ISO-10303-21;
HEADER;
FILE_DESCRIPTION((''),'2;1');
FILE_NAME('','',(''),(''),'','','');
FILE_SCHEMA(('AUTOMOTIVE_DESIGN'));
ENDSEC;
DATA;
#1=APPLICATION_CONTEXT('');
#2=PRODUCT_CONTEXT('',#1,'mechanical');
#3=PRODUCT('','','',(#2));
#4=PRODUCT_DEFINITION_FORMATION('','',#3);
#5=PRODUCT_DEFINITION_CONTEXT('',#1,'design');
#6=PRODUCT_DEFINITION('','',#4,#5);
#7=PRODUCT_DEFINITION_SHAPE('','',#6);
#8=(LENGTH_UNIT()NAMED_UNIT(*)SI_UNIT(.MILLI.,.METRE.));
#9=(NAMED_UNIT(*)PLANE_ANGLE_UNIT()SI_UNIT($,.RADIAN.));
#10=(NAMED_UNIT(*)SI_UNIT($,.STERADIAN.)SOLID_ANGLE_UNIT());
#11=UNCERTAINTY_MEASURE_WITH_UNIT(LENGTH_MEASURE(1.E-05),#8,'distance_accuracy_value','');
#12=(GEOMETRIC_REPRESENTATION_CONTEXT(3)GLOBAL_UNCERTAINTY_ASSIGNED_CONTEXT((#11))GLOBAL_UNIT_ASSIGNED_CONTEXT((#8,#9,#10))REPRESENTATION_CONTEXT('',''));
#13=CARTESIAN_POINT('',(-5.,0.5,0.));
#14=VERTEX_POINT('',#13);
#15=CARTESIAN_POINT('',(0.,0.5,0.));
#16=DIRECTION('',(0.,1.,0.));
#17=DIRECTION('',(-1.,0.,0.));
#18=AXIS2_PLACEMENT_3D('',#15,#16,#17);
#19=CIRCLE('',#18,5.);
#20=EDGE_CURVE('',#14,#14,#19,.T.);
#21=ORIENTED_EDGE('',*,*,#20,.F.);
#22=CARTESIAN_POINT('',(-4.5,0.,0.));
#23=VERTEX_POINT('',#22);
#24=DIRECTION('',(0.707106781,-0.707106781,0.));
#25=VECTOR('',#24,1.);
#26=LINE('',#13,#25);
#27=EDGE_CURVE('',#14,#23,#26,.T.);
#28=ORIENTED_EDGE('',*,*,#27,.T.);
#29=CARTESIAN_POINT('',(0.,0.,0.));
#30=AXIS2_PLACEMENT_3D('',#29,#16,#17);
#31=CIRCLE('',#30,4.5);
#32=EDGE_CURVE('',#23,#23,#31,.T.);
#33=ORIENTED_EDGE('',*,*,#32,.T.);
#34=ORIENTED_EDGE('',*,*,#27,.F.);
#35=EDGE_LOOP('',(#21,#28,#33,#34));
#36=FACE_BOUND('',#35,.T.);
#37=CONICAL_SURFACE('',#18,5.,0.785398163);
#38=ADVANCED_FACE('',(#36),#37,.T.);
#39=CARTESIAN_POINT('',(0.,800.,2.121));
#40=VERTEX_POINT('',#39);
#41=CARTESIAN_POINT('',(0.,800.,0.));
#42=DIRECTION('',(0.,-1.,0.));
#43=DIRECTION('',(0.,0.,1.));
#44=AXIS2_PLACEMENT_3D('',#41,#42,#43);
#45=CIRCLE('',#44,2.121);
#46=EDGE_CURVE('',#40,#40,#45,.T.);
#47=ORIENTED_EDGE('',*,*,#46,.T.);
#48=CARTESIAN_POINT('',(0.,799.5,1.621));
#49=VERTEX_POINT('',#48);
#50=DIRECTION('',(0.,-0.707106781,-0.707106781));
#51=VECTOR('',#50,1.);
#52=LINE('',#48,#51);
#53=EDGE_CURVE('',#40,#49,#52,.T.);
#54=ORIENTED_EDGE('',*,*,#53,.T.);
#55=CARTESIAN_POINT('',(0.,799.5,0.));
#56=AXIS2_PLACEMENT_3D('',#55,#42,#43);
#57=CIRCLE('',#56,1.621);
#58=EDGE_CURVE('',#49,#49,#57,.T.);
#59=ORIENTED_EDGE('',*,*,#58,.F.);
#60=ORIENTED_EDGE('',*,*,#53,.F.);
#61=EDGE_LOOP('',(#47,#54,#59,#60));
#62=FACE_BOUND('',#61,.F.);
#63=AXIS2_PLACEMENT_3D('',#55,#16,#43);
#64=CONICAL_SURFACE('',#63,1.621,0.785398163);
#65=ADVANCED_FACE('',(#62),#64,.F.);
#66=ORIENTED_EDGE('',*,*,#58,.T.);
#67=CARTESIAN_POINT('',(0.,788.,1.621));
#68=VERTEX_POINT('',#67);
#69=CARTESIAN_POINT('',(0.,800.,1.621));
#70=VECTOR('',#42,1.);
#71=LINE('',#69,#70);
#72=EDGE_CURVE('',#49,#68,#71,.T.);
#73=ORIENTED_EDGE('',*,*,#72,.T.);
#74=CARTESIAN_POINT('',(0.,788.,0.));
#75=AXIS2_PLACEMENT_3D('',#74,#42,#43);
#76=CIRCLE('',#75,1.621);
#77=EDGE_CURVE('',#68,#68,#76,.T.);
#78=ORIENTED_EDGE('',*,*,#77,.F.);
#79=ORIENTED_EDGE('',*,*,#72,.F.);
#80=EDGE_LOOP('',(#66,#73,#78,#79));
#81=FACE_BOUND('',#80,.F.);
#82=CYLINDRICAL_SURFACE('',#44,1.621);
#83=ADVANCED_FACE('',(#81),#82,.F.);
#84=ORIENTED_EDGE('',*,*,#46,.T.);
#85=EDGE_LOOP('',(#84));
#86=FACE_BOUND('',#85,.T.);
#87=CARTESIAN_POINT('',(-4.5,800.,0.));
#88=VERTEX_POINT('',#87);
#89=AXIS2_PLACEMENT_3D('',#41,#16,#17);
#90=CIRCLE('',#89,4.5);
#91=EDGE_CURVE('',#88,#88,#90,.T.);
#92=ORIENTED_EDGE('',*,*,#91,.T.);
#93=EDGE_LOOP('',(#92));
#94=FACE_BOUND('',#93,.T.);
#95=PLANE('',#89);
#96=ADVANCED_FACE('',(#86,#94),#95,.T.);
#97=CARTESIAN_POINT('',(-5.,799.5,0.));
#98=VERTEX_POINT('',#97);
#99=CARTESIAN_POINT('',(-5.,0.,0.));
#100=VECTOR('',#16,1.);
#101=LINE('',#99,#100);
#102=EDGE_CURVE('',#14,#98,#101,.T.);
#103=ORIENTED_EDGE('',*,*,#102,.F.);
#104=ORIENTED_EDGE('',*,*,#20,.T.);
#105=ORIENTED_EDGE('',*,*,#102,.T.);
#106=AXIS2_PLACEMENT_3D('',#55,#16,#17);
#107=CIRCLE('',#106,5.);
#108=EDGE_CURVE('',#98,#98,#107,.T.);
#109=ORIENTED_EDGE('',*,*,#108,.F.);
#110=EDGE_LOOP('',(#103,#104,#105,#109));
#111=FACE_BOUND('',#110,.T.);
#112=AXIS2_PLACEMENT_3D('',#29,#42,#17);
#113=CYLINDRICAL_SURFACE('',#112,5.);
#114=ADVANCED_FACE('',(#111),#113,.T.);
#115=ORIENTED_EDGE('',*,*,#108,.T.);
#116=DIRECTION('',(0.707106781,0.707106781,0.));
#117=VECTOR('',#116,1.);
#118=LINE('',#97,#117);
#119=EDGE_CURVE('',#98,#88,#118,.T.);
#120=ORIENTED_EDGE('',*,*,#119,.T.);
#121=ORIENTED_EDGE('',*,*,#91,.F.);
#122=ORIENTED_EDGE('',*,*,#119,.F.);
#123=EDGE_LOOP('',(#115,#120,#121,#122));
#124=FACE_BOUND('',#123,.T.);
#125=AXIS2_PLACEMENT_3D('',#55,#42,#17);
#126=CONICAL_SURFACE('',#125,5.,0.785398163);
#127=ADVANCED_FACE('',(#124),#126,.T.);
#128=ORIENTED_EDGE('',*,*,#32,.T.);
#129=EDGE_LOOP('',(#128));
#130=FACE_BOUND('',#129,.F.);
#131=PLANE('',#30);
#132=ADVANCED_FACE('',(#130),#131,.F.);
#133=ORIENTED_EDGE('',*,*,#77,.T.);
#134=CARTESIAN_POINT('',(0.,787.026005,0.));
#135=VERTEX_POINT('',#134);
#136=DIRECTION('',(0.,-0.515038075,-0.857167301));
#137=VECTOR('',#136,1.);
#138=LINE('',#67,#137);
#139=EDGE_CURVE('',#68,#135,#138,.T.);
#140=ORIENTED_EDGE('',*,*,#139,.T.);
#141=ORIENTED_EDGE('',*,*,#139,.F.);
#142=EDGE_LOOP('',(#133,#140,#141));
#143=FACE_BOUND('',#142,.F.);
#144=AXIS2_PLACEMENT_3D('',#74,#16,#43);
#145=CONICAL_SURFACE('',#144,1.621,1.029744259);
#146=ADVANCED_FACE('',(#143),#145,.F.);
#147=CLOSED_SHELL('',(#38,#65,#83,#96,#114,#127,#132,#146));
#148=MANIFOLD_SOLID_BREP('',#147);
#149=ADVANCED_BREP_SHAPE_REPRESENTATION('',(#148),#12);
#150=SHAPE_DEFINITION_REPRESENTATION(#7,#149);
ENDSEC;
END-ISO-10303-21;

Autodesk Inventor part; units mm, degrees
ref_plane "YZ Plane" through (0, 0, 0) normal (1, 0, 0) x (0, 1, 0)
ref_plane "XZ Plane" through (0, 0, 0) normal (0, 1, 0) x (-1, 0, 0)
ref_plane "XY Plane" through (0, 0, 0) normal (0, 0, 1) x (1, 0, 0)
sketch "Sketch1" plane through (0, 0, 0) normal (0, 1, 0) x (-1, 0, 0)
  circle A0 centre (0, 0) radius 5
  dimension "d0" = 10
extrude "Extrusion1" add sketch "Sketch1" along normal blind 800
sketch "Sketch2" plane through (0, 800, 0) normal (0, 1, 0) x (1, 0, 0)
  point P0 (0, 0)
  point P1 (0, 0)
hole "Hole1" at (0, 800, 0) direction (0, -1, 0) diameter 3.242 depth 12 tip angle 118 thread size "M4x0.7" class "6H" standard "ISO Metric profile"
chamfer "Chamfer1" distance 0.5 angle 45 3 edges at (0, 800, -1.621) (5, 800, 0) (5, 0, 0)
properties part number "CUT_ALU_10x800mm_Rod"
